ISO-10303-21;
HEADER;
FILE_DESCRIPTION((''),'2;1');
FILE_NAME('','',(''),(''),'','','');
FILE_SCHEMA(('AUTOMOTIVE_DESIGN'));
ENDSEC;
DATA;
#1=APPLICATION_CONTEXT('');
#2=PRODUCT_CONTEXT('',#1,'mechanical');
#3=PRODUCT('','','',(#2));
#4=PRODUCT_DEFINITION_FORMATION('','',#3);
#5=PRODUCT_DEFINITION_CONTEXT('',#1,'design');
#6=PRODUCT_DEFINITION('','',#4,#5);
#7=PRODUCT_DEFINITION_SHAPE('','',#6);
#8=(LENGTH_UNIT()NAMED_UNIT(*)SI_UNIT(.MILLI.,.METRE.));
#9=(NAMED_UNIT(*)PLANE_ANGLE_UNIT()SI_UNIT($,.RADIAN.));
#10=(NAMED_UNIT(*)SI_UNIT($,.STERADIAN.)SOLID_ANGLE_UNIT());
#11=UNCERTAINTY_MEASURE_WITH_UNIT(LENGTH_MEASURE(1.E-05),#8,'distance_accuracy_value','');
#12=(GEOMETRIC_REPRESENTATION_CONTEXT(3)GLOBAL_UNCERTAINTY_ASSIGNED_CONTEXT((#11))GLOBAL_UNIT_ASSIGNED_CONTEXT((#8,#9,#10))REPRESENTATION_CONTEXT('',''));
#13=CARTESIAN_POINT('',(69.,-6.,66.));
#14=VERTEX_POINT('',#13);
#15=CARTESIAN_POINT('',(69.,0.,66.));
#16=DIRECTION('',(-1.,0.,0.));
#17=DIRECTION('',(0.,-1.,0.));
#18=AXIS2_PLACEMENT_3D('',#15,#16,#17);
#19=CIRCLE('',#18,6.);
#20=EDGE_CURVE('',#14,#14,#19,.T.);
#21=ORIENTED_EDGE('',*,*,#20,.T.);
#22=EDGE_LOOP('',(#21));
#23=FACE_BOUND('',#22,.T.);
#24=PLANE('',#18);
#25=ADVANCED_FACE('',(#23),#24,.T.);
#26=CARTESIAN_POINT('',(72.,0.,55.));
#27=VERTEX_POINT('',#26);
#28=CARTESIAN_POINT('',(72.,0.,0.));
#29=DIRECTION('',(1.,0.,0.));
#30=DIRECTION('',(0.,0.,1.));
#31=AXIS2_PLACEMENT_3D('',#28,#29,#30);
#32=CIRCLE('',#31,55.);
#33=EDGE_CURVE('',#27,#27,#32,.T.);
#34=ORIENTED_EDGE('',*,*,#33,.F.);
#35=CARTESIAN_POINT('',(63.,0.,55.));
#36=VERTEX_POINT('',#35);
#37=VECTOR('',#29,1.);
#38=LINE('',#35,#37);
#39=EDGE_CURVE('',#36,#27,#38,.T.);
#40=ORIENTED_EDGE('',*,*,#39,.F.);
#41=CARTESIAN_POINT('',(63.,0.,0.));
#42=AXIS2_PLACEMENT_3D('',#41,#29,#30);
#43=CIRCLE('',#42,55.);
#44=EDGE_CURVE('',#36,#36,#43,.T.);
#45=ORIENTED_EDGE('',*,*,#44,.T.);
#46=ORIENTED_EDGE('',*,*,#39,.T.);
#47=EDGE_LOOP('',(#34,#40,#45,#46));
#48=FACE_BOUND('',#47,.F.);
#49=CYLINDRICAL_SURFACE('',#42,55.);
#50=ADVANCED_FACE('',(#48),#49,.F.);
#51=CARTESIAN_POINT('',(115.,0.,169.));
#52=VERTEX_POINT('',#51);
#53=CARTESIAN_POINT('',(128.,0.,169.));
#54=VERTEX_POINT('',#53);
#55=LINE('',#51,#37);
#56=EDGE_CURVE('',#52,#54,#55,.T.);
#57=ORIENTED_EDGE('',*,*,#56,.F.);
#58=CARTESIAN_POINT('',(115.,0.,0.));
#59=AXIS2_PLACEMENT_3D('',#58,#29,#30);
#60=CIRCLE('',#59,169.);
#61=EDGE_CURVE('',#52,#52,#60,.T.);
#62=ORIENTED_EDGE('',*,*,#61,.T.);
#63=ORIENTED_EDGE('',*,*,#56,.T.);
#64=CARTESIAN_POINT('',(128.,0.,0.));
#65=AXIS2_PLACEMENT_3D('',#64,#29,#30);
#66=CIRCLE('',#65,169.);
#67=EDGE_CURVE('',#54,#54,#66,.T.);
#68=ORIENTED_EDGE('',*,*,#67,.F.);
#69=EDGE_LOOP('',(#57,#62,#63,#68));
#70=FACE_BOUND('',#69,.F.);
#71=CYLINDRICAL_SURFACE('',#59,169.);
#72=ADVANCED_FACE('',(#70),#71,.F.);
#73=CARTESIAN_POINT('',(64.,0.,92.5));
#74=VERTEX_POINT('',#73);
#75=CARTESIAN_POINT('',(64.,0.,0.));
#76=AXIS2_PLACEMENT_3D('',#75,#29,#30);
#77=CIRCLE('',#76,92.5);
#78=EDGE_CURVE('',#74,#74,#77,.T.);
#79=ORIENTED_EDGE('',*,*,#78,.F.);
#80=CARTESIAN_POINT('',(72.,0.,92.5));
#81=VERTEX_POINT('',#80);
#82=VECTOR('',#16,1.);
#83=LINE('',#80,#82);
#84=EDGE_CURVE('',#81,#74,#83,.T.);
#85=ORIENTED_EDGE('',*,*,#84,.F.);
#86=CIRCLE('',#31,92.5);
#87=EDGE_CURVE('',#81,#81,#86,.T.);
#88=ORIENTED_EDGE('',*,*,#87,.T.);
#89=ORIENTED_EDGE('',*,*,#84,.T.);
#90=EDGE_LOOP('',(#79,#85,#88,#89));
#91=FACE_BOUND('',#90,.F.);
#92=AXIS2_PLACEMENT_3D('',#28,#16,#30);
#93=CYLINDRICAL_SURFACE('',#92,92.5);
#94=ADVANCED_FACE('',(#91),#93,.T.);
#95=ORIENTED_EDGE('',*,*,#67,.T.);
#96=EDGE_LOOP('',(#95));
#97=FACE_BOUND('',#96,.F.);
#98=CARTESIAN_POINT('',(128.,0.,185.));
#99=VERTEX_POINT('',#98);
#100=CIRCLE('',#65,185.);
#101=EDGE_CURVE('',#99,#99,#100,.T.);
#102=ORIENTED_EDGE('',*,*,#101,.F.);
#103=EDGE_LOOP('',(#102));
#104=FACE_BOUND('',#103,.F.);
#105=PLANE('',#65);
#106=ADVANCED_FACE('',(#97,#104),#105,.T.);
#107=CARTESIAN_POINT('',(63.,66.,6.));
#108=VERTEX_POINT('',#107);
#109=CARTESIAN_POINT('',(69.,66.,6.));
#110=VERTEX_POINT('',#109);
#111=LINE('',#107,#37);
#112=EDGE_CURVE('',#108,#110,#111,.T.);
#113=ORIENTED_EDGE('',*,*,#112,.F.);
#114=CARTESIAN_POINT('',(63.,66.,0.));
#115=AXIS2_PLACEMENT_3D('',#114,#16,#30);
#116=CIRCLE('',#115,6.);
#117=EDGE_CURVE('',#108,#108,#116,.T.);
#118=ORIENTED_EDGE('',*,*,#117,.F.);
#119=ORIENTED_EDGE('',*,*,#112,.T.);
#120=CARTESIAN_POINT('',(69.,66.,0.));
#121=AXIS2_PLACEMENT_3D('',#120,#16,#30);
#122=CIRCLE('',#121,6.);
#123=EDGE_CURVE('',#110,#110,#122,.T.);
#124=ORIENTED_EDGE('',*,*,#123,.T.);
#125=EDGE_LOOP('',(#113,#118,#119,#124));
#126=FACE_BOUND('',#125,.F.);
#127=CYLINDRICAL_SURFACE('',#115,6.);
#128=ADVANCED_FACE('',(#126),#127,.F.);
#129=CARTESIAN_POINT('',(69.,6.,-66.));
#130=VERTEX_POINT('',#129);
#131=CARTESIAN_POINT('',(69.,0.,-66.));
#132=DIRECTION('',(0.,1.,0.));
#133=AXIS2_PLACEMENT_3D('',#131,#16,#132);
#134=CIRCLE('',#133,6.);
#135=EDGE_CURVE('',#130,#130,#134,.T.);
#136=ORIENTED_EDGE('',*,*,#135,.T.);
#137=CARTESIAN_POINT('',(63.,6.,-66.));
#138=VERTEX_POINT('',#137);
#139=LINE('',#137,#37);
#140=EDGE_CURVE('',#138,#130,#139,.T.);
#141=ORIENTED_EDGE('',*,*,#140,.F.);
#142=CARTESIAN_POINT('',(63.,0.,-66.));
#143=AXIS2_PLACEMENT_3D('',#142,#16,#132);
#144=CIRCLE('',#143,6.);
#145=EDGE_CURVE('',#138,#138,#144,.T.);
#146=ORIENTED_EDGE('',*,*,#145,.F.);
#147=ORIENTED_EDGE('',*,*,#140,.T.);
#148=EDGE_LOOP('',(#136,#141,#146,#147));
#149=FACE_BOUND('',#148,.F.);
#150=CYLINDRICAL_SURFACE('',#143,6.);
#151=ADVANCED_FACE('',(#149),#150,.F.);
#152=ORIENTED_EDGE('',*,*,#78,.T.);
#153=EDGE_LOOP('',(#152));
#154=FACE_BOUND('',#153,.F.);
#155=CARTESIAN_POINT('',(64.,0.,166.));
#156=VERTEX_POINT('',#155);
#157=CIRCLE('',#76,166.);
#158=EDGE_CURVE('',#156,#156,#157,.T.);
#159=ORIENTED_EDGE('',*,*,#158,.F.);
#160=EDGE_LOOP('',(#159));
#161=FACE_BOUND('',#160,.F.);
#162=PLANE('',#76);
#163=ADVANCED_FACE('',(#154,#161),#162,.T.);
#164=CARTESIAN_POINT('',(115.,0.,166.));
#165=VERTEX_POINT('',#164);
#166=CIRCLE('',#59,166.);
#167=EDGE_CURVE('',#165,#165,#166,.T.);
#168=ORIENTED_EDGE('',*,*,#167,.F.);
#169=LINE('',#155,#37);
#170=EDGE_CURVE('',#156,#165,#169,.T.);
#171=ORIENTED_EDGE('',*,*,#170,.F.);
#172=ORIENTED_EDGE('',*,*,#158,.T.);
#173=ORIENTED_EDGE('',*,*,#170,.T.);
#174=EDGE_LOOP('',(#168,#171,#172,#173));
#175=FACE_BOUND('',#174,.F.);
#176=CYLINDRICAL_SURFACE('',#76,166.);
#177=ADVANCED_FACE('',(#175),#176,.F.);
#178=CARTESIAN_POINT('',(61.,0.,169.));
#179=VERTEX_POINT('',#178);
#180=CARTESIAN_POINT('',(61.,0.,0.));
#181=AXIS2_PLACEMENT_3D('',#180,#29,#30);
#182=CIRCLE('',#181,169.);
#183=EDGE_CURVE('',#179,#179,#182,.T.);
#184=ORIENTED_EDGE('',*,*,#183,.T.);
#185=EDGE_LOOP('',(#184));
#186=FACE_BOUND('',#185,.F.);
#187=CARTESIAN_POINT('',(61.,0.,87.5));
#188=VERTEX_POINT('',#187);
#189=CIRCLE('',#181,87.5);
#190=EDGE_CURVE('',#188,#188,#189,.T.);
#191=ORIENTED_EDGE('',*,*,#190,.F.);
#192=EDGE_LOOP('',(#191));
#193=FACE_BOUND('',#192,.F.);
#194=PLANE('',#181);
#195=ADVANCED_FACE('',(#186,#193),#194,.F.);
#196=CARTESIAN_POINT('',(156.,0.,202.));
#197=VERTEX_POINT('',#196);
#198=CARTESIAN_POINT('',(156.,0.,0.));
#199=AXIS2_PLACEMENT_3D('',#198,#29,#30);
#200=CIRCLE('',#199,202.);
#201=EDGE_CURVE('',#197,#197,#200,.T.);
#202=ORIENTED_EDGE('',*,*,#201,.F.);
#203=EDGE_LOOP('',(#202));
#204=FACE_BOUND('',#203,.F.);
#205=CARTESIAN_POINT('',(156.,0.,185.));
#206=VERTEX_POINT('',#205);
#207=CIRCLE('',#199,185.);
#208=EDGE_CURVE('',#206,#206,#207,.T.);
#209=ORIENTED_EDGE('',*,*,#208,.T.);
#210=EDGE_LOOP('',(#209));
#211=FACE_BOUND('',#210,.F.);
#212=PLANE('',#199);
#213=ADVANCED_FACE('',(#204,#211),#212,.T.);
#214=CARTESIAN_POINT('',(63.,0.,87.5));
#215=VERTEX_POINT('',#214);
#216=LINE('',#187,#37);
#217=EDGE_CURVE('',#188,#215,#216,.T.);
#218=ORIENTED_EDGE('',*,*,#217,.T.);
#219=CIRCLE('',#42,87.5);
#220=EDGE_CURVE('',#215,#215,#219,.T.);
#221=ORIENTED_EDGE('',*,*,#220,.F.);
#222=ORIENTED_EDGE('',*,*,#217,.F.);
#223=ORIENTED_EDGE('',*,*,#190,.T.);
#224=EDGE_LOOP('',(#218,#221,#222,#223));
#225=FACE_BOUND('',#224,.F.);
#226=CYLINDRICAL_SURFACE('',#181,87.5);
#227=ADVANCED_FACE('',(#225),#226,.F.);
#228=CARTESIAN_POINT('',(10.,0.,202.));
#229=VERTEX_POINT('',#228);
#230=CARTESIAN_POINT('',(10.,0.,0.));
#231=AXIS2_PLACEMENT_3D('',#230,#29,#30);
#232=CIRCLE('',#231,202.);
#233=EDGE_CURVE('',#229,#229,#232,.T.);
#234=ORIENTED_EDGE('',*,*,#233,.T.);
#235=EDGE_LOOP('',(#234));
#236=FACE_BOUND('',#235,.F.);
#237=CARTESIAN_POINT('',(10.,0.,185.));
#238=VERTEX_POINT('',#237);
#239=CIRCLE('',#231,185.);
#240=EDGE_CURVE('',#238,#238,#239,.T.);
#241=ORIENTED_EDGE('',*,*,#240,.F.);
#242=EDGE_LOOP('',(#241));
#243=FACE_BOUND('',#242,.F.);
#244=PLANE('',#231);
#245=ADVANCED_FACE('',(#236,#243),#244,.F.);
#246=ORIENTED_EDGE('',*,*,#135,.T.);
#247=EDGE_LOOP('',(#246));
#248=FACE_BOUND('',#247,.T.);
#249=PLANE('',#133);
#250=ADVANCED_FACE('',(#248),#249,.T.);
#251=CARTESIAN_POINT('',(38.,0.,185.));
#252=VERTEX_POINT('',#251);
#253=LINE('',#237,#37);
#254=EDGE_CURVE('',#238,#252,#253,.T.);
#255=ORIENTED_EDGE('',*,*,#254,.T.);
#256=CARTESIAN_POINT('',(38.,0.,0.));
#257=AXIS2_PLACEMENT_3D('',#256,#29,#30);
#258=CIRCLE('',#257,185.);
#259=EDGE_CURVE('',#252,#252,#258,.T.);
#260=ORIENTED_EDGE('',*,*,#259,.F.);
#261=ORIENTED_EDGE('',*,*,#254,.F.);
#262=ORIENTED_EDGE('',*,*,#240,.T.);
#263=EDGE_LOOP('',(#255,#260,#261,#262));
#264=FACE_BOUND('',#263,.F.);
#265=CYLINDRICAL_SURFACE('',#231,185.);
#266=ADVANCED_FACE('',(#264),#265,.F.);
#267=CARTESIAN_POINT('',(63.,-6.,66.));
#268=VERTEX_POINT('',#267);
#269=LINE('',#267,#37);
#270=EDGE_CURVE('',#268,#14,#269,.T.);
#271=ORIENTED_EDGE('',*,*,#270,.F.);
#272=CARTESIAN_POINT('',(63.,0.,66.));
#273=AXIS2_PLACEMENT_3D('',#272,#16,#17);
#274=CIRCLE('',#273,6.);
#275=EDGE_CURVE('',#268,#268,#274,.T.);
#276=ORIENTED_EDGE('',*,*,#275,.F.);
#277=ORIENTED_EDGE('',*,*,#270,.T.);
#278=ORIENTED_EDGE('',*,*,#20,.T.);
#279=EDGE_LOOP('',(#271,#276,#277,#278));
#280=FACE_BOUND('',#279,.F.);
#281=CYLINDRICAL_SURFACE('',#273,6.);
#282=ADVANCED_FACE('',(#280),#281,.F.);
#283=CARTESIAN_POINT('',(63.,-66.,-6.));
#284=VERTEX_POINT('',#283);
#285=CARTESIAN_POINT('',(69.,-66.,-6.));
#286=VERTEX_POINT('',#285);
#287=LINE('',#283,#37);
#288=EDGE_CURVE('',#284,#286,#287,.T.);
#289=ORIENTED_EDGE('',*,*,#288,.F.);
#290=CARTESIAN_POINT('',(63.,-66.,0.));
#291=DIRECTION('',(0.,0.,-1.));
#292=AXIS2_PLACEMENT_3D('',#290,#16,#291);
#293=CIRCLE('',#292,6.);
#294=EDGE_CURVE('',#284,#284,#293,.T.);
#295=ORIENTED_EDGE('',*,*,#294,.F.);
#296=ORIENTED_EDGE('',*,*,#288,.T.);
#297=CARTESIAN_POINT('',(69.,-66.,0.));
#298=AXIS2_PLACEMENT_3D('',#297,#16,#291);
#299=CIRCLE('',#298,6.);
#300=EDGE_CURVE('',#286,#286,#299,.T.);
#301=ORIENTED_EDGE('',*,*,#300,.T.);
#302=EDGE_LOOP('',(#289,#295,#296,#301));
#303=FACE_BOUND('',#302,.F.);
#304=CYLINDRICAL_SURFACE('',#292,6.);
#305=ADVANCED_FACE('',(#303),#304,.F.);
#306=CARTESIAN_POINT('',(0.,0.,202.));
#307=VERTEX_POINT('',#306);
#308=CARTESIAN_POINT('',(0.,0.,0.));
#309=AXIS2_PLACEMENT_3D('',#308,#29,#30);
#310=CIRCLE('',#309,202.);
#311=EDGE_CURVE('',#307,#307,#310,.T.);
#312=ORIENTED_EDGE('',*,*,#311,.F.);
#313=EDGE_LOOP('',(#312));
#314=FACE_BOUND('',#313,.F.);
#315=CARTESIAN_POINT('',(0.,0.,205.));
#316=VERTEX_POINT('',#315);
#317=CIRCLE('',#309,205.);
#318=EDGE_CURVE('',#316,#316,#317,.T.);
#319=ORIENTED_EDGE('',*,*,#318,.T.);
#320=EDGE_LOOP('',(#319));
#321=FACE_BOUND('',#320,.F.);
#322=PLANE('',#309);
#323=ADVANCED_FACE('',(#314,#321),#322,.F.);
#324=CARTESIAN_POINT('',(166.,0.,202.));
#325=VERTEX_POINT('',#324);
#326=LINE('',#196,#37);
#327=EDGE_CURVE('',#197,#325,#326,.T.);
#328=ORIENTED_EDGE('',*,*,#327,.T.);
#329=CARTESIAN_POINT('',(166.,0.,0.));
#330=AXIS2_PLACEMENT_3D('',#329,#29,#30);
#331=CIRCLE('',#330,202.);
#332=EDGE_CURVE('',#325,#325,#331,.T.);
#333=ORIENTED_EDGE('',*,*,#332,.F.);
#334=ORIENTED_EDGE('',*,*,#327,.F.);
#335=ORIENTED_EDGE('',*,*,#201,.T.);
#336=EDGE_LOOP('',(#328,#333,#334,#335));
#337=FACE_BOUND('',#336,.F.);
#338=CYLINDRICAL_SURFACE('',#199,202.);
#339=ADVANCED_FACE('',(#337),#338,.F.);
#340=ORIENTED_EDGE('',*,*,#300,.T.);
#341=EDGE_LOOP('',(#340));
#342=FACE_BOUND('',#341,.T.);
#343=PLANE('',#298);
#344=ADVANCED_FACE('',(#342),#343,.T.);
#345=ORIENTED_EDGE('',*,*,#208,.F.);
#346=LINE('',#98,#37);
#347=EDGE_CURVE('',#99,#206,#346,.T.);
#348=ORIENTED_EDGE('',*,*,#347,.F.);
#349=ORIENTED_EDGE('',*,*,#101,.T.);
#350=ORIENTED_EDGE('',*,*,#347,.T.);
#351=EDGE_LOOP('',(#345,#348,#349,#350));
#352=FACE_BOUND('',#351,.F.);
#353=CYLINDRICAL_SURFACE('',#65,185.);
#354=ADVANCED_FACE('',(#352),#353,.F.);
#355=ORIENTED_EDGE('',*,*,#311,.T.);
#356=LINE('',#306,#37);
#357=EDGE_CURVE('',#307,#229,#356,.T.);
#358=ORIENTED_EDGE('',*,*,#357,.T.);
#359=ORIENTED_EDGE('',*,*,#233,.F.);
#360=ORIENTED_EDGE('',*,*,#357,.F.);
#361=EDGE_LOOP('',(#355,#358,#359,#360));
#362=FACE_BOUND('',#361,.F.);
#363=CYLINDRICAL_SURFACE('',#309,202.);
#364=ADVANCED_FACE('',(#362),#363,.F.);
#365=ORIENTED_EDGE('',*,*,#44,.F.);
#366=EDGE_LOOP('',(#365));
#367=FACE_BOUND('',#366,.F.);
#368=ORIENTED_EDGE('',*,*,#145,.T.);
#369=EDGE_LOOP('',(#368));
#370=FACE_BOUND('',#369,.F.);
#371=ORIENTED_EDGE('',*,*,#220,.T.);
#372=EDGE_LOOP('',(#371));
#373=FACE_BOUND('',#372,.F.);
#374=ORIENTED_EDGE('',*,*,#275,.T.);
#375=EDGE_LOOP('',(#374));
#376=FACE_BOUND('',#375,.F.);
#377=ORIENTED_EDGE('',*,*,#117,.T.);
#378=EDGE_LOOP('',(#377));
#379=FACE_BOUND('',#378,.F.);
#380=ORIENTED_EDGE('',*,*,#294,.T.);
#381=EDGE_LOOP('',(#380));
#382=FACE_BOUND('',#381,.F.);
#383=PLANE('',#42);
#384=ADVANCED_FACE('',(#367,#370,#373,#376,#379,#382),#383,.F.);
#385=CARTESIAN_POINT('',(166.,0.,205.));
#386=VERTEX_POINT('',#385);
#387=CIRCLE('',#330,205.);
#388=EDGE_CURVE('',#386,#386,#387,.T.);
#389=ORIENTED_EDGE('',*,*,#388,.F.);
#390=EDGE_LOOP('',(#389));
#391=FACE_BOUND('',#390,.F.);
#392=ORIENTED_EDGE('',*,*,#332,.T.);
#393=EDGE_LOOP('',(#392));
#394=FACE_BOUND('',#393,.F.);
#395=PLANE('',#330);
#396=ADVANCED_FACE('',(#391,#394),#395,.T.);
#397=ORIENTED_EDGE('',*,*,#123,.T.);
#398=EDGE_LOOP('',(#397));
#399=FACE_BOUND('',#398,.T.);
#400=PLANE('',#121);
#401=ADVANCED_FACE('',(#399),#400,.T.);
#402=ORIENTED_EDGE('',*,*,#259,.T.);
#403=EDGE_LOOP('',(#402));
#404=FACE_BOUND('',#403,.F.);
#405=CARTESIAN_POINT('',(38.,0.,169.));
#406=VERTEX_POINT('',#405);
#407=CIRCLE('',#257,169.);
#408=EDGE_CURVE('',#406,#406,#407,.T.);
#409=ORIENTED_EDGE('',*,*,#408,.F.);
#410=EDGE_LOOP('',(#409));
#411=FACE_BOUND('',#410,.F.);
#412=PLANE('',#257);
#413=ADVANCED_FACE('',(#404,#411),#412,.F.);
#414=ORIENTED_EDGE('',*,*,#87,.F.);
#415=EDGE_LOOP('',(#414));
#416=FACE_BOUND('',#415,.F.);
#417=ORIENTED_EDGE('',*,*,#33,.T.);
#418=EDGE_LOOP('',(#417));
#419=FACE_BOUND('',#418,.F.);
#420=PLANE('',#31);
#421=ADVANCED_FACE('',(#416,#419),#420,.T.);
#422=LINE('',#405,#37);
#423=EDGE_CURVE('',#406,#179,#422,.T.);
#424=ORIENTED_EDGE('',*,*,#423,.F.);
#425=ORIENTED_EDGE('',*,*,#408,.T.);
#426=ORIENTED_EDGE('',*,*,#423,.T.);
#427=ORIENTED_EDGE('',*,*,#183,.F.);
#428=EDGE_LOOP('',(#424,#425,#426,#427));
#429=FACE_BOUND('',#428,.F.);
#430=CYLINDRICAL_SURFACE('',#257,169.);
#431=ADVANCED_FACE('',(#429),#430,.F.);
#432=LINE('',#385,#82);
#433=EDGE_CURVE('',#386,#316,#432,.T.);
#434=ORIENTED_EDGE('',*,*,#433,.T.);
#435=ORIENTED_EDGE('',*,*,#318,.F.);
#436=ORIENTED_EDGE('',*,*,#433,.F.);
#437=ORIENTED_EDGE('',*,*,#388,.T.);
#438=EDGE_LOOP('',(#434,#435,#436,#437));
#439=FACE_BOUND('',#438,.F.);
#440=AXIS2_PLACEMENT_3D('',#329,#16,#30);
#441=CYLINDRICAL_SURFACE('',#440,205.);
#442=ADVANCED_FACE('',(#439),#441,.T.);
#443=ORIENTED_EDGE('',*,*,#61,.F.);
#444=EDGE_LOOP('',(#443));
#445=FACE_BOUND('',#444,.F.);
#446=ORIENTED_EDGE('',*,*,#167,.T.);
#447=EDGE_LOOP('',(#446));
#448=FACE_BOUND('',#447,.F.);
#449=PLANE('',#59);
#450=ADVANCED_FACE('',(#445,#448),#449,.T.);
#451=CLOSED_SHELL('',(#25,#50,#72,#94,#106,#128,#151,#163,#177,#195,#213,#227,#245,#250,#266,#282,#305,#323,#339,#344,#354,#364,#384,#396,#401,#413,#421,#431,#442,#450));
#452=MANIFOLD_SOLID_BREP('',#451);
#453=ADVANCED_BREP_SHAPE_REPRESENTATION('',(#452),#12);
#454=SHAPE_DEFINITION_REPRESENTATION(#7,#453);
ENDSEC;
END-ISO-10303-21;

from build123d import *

# Parameters (mm, degrees)
F2_R            = 6
F3_DEPTH        = 6
F3_COPIES_COUNT = 4


# Not quite as in the source:
# - a pattern or mirror of a feature is missing from the dataset's text; its kind, count and spacing are read off the source's solid


with BuildPart() as f1:
    # F0 (on Front) → F1 (revolve)
    with BuildSketch(Plane.XZ):
        Polygon((166, 205), (0, 205), (0, 202), (10, 202), (10, 185), (38, 185), (38, 169), (61, 169), (61, 87.5), (63, 87.5), (63, 55), (72, 55), (72, 92.5), (64, 92.5), (64, 166), (115, 166), (115, 169), (128, 169), (128, 185), (156, 185), (156, 202), (166, 202), align=None)
    revolve(axis=Axis((83, 0, 0), (1, 0, 0)))

    # F2 (on face) → F3 (cut)
    with BuildSketch(Plane(origin=(63, 0, 0), x_dir=(0, -1, 0), z_dir=(-1, 0, 0))):
        with Locations((0, 66)):
            Circle(F2_R)
    f3 = extrude(amount=-F3_DEPTH, mode=Mode.SUBTRACT)

    # F3_copies: F3 ×4 about axis
    f3_copies_axis = Axis((0, 0, 0), (1, 0, 0))
    for i in range(1, F3_COPIES_COUNT):
        add(f3.rotate(f3_copies_axis, i * 360 / F3_COPIES_COUNT), mode=Mode.SUBTRACT)


solid = f1.part
